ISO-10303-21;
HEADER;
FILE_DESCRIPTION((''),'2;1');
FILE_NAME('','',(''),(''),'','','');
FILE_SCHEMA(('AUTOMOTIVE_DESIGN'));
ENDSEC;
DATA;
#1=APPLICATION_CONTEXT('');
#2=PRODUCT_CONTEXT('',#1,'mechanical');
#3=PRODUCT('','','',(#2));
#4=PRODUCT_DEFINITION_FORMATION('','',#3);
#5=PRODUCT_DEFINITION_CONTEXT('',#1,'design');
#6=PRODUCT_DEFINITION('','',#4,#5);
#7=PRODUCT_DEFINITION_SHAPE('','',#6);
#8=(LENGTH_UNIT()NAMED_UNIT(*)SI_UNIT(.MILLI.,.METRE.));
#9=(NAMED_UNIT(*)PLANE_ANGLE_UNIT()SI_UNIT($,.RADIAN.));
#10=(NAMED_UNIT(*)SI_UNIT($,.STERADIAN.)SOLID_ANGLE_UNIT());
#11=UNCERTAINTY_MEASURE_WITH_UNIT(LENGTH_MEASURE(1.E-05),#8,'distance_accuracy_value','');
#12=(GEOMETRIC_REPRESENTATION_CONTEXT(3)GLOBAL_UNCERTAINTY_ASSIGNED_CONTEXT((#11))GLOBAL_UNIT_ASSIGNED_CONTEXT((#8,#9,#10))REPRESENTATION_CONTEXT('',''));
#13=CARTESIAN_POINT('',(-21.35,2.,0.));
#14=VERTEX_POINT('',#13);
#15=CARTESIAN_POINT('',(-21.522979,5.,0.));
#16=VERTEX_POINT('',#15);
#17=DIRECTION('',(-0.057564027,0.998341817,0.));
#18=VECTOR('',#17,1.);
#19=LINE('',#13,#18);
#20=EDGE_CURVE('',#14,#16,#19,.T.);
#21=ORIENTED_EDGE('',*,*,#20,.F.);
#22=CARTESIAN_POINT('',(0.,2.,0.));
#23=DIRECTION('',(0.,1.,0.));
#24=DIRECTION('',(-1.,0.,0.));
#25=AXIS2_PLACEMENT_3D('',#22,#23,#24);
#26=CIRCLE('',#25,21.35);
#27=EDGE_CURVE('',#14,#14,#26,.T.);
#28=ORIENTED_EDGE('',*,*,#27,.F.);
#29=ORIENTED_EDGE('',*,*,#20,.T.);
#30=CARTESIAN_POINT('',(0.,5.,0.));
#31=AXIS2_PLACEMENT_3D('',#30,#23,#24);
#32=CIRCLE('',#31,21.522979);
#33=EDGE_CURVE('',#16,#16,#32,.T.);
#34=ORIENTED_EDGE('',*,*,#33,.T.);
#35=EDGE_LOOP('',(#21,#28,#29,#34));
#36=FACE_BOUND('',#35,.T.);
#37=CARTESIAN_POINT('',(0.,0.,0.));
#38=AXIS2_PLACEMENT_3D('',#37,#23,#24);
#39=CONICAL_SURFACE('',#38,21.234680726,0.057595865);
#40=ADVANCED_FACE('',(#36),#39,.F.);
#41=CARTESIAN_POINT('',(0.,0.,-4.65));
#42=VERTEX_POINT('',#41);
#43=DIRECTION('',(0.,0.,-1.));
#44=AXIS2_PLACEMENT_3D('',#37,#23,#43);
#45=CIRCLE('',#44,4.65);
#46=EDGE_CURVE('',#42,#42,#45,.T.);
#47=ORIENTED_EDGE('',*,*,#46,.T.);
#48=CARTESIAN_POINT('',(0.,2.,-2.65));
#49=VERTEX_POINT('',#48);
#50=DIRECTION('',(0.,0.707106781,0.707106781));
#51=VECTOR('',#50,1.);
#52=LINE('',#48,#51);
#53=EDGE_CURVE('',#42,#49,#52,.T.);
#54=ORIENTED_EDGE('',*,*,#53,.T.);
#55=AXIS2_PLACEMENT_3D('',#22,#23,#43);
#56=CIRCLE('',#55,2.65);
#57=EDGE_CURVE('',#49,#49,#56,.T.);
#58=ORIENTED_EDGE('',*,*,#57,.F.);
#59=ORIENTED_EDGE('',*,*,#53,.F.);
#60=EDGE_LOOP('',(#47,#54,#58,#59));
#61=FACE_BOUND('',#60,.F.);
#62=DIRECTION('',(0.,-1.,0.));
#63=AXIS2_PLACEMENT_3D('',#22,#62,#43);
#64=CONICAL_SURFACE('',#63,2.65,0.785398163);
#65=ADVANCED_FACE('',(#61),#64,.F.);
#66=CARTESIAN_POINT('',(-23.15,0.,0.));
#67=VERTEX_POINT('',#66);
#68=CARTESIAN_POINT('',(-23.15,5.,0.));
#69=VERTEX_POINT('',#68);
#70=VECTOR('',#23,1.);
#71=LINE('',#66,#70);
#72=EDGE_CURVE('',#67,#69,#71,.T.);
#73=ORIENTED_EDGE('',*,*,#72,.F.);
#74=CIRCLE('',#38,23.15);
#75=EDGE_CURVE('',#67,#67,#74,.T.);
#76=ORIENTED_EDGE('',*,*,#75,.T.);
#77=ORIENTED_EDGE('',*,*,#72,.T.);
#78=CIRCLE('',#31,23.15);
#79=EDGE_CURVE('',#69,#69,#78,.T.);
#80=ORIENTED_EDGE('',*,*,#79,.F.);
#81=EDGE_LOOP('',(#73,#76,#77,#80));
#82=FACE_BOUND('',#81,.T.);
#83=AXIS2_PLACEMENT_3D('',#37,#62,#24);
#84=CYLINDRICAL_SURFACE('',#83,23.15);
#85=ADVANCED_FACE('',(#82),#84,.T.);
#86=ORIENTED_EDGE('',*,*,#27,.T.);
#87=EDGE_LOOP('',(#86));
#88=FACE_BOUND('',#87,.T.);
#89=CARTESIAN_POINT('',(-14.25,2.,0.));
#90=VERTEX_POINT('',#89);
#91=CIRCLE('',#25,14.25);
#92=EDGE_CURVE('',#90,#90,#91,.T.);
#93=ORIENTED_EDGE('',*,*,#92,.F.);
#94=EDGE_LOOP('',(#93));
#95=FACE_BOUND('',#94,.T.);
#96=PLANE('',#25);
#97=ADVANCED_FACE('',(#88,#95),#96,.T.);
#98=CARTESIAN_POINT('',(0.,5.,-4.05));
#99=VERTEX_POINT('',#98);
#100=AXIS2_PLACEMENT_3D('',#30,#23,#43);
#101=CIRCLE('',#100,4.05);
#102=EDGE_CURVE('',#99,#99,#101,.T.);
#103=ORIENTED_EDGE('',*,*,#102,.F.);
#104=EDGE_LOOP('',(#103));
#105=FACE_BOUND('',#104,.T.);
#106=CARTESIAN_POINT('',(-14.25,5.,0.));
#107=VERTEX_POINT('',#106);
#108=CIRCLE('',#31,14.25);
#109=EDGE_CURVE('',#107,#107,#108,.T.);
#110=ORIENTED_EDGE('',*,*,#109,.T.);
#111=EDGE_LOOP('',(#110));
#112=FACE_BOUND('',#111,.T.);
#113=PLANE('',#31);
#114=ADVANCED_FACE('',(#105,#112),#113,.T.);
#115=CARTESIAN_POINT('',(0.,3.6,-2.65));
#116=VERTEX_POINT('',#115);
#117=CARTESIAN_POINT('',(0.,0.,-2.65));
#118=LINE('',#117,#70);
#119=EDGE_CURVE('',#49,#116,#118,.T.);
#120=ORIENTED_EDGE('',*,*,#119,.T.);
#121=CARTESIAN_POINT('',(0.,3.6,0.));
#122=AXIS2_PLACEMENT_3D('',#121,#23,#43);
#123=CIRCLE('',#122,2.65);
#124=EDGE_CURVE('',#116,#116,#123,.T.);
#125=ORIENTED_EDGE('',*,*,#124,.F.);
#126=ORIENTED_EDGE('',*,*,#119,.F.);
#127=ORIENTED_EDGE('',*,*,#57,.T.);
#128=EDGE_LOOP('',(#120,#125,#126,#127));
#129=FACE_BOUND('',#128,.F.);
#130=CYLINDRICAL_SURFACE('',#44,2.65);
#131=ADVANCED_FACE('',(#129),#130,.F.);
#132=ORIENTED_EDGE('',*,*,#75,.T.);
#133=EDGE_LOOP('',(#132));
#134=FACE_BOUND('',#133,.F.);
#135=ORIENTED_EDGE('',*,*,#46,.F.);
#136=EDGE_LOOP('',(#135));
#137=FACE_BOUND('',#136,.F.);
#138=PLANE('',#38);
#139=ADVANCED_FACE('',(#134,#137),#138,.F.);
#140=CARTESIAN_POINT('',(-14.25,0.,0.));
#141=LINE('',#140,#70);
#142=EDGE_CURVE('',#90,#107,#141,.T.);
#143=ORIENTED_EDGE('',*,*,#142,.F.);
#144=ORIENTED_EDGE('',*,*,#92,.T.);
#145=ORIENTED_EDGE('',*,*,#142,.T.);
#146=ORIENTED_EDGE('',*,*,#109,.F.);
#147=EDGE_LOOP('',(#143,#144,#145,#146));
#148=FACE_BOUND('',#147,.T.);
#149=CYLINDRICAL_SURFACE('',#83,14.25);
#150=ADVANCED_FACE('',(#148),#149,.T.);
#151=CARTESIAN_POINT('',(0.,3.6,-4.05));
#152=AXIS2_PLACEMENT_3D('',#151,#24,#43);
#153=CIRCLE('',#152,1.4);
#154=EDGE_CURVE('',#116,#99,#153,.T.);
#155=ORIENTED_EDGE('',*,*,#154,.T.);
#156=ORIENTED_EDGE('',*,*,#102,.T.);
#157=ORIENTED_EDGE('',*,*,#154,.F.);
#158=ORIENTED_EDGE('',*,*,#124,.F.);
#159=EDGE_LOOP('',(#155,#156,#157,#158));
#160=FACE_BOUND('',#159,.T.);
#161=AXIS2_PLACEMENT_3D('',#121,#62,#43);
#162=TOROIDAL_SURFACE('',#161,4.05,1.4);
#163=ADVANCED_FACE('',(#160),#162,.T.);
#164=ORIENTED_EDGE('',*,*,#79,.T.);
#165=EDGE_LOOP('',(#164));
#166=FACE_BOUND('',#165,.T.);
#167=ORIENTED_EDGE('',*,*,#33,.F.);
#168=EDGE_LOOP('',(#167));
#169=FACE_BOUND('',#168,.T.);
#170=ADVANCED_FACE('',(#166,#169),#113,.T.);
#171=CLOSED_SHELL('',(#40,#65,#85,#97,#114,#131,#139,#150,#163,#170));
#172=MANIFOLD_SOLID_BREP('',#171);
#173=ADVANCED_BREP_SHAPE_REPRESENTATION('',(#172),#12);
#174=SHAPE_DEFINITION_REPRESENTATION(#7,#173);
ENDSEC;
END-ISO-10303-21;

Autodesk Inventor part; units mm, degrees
ref_plane "YZ Plane" through (0, 0, 0) normal (1, 0, 0) x (0, 1, 0)
ref_plane "XZ Plane" through (0, 0, 0) normal (0, 1, 0) x (-1, 0, 0)
ref_plane "XY Plane" through (0, 0, 0) normal (0, 0, 1) x (1, 0, 0)
sketch "Sketch1" plane through (0, 0, 0) normal (0, 1, 0) x (-1, 0, 0)
  circle A0 centre (0, 0) radius 21.35
  circle A1 centre (0, 0) radius 14.25
  circle A2 centre (0, 0) radius 23.15
  dimension "d0" = 42.7
  dimension "d1" = 28.5
  dimension "d3" = 1.8
extrude "Extrusion1" add sketch "Sketch1" along normal blind 5
extrude "Extrusion2" add sketch "Sketch1" along normal blind 2 contours A0
draft "FaceDraft1" angle 3.3 pull direction (0, 1, 0) faces at (-21.0735, 4, -3.4248) fixed edges at (21.35, 2, 0)
hole "Hole1" at (0, 0, 0) direction (0, 1, 0) diameter 5.3 end through all
chamfer "Chamfer1" distance 2 angle 45 1 edges at (0, 0, 2.65)
fillet "Fillet1" radius 1.4 1 edges at (0, 5, 2.65)
properties part number "Cap V2 (App V5)"
